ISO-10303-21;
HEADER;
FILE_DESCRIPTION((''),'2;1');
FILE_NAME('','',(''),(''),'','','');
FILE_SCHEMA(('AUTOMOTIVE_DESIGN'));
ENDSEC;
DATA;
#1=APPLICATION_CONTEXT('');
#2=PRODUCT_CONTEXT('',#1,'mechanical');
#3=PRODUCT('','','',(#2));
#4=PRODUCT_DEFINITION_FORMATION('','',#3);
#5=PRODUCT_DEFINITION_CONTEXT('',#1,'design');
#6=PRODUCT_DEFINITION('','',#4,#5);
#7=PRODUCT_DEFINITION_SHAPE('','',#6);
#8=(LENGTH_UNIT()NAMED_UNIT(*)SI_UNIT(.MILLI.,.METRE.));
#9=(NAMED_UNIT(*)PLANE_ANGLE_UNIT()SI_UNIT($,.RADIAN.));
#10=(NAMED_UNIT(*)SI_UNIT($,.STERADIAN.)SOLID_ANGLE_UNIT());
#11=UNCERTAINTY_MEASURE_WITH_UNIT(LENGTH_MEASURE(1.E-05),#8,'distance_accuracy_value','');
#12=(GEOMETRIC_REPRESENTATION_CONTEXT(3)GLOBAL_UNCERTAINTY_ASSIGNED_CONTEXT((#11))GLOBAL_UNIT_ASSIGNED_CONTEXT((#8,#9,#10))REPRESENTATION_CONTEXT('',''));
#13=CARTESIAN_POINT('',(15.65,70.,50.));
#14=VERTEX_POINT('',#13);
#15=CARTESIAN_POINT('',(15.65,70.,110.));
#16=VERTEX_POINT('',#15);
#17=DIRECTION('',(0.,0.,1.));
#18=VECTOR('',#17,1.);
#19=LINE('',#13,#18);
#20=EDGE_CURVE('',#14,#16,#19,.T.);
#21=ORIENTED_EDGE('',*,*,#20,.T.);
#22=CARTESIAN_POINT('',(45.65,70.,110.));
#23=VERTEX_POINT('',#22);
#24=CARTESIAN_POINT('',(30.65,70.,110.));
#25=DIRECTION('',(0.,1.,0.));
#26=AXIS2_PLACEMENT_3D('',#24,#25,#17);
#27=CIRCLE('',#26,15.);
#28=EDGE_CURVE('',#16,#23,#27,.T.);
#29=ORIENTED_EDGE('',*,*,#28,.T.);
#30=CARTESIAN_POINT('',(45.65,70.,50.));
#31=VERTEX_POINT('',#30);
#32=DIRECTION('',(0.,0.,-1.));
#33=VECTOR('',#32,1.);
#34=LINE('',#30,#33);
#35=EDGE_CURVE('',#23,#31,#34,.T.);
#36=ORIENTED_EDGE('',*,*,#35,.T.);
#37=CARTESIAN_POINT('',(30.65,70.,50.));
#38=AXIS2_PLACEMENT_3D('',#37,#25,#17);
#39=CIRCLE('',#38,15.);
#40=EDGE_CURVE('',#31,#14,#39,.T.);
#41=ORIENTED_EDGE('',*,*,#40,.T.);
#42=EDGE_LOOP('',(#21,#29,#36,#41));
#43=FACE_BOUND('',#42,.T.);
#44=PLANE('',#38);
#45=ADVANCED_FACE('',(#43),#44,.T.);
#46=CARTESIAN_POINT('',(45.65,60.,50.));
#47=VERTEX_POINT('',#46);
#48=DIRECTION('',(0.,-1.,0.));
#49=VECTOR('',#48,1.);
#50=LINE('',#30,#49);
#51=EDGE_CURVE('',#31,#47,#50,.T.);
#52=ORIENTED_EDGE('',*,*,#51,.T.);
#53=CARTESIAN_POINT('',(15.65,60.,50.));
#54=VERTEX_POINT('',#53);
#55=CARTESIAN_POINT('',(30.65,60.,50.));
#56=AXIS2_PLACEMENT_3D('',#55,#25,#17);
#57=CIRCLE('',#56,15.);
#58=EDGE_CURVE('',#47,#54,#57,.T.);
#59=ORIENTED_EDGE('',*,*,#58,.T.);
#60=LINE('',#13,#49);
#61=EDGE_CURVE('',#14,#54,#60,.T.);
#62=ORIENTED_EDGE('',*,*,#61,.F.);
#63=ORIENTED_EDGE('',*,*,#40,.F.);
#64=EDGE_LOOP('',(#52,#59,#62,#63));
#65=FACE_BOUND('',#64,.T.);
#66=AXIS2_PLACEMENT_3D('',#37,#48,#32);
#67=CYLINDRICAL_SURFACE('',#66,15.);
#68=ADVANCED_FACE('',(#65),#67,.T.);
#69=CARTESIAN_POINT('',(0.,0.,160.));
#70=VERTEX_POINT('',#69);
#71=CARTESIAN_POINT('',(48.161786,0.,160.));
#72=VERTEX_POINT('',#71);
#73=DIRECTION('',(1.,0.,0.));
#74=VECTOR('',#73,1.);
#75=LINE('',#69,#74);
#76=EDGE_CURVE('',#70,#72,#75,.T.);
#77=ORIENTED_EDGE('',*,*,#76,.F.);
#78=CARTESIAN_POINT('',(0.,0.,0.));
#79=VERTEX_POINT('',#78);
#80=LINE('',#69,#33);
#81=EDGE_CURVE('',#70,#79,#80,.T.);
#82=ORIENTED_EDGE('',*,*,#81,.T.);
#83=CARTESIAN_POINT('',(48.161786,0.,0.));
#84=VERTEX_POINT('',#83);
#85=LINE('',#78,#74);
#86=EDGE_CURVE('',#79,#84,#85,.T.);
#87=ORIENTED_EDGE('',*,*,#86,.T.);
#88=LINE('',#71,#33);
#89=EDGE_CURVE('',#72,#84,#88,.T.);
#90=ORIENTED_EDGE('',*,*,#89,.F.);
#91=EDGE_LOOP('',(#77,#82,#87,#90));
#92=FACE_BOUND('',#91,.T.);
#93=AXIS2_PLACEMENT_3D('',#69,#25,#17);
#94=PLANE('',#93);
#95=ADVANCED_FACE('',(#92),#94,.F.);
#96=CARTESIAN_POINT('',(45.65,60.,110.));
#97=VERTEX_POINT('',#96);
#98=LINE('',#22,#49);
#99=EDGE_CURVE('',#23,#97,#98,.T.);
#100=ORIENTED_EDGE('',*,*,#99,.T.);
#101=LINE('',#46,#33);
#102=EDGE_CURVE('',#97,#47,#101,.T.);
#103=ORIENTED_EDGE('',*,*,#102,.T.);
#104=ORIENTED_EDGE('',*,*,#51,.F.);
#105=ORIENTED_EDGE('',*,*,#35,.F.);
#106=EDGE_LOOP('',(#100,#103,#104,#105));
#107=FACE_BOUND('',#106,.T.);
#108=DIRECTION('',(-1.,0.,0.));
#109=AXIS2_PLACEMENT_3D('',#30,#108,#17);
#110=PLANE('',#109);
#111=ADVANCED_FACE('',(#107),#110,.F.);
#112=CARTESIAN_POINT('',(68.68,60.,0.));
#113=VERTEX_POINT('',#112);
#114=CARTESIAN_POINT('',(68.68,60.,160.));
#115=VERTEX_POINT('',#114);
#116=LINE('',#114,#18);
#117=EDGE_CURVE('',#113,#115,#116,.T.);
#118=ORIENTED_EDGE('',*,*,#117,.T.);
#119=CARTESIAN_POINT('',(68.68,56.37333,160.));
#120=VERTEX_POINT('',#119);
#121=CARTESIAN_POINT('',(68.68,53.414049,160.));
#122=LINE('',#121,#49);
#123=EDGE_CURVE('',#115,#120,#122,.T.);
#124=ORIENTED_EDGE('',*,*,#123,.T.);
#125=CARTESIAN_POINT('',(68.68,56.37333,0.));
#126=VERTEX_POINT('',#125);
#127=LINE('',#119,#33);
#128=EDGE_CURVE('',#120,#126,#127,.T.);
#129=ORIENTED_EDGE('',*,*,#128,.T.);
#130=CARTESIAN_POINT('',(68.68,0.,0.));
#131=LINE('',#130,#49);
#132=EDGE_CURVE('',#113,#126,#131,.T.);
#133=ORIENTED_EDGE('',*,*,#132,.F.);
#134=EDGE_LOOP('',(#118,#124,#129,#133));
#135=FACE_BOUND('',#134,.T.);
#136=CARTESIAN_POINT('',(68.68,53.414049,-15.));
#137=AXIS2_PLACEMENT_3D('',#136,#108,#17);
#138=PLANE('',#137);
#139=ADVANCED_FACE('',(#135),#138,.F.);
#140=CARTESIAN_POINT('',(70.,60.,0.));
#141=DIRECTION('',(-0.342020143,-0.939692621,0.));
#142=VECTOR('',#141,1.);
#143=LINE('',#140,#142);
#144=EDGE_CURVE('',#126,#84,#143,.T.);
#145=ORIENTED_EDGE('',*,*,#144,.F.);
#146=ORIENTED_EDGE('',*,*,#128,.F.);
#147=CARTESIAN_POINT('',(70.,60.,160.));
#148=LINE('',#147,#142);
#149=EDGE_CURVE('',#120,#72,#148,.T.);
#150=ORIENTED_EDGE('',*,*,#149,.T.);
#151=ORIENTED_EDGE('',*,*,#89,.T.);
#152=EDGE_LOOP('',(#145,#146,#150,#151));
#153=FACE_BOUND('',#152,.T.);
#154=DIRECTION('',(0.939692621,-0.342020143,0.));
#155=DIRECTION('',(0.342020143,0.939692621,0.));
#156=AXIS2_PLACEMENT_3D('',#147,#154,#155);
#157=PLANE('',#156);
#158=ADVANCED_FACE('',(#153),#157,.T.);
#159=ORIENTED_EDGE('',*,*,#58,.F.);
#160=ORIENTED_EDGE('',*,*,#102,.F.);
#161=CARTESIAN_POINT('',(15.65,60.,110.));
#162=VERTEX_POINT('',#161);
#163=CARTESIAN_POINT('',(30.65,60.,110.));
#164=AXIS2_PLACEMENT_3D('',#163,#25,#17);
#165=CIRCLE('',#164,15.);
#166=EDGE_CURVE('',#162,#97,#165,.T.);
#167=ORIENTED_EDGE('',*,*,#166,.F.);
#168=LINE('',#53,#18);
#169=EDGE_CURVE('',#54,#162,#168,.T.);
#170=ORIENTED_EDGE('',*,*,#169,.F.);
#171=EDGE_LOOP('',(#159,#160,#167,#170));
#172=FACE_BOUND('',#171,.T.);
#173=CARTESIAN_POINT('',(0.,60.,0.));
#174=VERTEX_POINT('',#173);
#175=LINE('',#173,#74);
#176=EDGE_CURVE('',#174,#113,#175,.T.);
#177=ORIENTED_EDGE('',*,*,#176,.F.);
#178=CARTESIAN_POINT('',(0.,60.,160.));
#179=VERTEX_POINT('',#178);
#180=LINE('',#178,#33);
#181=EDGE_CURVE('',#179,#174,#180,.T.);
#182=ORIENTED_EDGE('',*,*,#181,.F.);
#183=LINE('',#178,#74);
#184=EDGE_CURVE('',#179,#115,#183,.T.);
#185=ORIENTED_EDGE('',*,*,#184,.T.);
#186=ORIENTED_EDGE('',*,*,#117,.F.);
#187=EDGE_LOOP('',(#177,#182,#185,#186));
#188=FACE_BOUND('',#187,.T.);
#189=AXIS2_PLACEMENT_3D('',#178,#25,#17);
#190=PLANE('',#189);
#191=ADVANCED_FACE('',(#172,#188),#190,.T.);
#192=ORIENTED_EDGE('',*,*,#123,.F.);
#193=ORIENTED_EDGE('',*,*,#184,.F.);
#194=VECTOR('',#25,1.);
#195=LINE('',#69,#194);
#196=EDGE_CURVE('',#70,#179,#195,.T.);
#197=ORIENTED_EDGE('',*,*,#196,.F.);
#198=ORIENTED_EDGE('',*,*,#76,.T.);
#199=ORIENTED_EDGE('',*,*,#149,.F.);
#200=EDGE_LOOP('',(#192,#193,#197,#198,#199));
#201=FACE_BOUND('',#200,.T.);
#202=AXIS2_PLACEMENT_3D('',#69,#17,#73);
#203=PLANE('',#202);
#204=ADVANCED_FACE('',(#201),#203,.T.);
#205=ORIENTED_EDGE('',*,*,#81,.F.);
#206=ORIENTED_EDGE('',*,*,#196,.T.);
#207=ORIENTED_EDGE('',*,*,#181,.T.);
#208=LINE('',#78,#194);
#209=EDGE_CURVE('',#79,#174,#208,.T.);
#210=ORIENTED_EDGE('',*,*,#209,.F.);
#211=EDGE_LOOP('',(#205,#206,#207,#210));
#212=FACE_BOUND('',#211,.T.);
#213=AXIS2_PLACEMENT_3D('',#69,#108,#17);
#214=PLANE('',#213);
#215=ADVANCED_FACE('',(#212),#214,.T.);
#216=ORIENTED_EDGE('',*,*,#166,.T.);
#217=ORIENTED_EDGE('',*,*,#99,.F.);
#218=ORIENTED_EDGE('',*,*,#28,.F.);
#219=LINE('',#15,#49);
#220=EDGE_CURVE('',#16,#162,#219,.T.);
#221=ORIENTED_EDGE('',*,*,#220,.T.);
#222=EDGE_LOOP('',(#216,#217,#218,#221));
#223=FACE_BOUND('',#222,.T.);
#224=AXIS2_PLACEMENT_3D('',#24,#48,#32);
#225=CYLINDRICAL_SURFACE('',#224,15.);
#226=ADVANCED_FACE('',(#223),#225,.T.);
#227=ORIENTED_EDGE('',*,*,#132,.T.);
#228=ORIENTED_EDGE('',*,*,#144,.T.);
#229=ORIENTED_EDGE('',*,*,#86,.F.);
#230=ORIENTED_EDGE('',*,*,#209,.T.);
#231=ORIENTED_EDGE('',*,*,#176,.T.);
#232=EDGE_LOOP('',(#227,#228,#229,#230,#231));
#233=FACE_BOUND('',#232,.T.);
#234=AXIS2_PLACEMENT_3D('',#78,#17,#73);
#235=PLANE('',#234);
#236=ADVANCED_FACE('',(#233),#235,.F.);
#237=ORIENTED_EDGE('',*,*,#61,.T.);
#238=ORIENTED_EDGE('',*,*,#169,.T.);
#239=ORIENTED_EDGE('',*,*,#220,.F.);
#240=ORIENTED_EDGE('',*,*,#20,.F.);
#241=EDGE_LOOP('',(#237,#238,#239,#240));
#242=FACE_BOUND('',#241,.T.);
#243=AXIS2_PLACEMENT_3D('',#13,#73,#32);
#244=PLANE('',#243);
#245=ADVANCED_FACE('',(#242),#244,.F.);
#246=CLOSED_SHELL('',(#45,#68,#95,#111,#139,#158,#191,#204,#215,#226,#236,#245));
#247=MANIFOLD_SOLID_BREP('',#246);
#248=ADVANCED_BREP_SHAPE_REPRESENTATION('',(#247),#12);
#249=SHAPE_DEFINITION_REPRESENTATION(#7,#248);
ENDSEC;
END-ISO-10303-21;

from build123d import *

# Parameters (mm, degrees)
BOSS_EXTRUDE1_DEPTH = 160
BOSS_EXTRUDE2_START = 60
BOSS_EXTRUDE2_DEPTH = 10
SKETCH4_W           = 2.23742312
SKETCH4_H           = 10.231207741
CUT_EXTRUDE1_DEPTH  = 175


# Read off the part's stored shape, not the designer's step: Boss-Extrude2
with BuildPart() as part:
    # Sketch1 → Boss-Extrude1 (new body)
    with BuildSketch(Plane.XY):
        Polygon((0, 0), (0, 60), (70, 60), (48.161785944, 0), align=None)
    extrude(amount=BOSS_EXTRUDE1_DEPTH)

    # Boss-Extrude2 outline → Boss-Extrude2 (add)
    with BuildSketch(Plane(origin=(0, 0, 0), x_dir=(1, 0, 0), z_dir=(0, 1, 0)).offset(BOSS_EXTRUDE2_START)):
        with BuildLine():
            ThreePointArc((45.65, -50), (30.65, -35), (15.65, -50))
            Line((15.65, -50), (15.65, -110))
            ThreePointArc((15.65, -110), (30.65, -125), (45.65, -110))
            Line((45.65, -110), (45.65, -50))
        make_face()
    extrude(amount=BOSS_EXTRUDE2_DEPTH)

    # Sketch4 → Cut-Extrude1 (cut)
    with BuildSketch(Plane.XY.offset(160)):
        with Locations((69.79871156, 58.529652548)):
            Rectangle(SKETCH4_W, SKETCH4_H)
    extrude(amount=-CUT_EXTRUDE1_DEPTH, mode=Mode.SUBTRACT)


solid = part.part
